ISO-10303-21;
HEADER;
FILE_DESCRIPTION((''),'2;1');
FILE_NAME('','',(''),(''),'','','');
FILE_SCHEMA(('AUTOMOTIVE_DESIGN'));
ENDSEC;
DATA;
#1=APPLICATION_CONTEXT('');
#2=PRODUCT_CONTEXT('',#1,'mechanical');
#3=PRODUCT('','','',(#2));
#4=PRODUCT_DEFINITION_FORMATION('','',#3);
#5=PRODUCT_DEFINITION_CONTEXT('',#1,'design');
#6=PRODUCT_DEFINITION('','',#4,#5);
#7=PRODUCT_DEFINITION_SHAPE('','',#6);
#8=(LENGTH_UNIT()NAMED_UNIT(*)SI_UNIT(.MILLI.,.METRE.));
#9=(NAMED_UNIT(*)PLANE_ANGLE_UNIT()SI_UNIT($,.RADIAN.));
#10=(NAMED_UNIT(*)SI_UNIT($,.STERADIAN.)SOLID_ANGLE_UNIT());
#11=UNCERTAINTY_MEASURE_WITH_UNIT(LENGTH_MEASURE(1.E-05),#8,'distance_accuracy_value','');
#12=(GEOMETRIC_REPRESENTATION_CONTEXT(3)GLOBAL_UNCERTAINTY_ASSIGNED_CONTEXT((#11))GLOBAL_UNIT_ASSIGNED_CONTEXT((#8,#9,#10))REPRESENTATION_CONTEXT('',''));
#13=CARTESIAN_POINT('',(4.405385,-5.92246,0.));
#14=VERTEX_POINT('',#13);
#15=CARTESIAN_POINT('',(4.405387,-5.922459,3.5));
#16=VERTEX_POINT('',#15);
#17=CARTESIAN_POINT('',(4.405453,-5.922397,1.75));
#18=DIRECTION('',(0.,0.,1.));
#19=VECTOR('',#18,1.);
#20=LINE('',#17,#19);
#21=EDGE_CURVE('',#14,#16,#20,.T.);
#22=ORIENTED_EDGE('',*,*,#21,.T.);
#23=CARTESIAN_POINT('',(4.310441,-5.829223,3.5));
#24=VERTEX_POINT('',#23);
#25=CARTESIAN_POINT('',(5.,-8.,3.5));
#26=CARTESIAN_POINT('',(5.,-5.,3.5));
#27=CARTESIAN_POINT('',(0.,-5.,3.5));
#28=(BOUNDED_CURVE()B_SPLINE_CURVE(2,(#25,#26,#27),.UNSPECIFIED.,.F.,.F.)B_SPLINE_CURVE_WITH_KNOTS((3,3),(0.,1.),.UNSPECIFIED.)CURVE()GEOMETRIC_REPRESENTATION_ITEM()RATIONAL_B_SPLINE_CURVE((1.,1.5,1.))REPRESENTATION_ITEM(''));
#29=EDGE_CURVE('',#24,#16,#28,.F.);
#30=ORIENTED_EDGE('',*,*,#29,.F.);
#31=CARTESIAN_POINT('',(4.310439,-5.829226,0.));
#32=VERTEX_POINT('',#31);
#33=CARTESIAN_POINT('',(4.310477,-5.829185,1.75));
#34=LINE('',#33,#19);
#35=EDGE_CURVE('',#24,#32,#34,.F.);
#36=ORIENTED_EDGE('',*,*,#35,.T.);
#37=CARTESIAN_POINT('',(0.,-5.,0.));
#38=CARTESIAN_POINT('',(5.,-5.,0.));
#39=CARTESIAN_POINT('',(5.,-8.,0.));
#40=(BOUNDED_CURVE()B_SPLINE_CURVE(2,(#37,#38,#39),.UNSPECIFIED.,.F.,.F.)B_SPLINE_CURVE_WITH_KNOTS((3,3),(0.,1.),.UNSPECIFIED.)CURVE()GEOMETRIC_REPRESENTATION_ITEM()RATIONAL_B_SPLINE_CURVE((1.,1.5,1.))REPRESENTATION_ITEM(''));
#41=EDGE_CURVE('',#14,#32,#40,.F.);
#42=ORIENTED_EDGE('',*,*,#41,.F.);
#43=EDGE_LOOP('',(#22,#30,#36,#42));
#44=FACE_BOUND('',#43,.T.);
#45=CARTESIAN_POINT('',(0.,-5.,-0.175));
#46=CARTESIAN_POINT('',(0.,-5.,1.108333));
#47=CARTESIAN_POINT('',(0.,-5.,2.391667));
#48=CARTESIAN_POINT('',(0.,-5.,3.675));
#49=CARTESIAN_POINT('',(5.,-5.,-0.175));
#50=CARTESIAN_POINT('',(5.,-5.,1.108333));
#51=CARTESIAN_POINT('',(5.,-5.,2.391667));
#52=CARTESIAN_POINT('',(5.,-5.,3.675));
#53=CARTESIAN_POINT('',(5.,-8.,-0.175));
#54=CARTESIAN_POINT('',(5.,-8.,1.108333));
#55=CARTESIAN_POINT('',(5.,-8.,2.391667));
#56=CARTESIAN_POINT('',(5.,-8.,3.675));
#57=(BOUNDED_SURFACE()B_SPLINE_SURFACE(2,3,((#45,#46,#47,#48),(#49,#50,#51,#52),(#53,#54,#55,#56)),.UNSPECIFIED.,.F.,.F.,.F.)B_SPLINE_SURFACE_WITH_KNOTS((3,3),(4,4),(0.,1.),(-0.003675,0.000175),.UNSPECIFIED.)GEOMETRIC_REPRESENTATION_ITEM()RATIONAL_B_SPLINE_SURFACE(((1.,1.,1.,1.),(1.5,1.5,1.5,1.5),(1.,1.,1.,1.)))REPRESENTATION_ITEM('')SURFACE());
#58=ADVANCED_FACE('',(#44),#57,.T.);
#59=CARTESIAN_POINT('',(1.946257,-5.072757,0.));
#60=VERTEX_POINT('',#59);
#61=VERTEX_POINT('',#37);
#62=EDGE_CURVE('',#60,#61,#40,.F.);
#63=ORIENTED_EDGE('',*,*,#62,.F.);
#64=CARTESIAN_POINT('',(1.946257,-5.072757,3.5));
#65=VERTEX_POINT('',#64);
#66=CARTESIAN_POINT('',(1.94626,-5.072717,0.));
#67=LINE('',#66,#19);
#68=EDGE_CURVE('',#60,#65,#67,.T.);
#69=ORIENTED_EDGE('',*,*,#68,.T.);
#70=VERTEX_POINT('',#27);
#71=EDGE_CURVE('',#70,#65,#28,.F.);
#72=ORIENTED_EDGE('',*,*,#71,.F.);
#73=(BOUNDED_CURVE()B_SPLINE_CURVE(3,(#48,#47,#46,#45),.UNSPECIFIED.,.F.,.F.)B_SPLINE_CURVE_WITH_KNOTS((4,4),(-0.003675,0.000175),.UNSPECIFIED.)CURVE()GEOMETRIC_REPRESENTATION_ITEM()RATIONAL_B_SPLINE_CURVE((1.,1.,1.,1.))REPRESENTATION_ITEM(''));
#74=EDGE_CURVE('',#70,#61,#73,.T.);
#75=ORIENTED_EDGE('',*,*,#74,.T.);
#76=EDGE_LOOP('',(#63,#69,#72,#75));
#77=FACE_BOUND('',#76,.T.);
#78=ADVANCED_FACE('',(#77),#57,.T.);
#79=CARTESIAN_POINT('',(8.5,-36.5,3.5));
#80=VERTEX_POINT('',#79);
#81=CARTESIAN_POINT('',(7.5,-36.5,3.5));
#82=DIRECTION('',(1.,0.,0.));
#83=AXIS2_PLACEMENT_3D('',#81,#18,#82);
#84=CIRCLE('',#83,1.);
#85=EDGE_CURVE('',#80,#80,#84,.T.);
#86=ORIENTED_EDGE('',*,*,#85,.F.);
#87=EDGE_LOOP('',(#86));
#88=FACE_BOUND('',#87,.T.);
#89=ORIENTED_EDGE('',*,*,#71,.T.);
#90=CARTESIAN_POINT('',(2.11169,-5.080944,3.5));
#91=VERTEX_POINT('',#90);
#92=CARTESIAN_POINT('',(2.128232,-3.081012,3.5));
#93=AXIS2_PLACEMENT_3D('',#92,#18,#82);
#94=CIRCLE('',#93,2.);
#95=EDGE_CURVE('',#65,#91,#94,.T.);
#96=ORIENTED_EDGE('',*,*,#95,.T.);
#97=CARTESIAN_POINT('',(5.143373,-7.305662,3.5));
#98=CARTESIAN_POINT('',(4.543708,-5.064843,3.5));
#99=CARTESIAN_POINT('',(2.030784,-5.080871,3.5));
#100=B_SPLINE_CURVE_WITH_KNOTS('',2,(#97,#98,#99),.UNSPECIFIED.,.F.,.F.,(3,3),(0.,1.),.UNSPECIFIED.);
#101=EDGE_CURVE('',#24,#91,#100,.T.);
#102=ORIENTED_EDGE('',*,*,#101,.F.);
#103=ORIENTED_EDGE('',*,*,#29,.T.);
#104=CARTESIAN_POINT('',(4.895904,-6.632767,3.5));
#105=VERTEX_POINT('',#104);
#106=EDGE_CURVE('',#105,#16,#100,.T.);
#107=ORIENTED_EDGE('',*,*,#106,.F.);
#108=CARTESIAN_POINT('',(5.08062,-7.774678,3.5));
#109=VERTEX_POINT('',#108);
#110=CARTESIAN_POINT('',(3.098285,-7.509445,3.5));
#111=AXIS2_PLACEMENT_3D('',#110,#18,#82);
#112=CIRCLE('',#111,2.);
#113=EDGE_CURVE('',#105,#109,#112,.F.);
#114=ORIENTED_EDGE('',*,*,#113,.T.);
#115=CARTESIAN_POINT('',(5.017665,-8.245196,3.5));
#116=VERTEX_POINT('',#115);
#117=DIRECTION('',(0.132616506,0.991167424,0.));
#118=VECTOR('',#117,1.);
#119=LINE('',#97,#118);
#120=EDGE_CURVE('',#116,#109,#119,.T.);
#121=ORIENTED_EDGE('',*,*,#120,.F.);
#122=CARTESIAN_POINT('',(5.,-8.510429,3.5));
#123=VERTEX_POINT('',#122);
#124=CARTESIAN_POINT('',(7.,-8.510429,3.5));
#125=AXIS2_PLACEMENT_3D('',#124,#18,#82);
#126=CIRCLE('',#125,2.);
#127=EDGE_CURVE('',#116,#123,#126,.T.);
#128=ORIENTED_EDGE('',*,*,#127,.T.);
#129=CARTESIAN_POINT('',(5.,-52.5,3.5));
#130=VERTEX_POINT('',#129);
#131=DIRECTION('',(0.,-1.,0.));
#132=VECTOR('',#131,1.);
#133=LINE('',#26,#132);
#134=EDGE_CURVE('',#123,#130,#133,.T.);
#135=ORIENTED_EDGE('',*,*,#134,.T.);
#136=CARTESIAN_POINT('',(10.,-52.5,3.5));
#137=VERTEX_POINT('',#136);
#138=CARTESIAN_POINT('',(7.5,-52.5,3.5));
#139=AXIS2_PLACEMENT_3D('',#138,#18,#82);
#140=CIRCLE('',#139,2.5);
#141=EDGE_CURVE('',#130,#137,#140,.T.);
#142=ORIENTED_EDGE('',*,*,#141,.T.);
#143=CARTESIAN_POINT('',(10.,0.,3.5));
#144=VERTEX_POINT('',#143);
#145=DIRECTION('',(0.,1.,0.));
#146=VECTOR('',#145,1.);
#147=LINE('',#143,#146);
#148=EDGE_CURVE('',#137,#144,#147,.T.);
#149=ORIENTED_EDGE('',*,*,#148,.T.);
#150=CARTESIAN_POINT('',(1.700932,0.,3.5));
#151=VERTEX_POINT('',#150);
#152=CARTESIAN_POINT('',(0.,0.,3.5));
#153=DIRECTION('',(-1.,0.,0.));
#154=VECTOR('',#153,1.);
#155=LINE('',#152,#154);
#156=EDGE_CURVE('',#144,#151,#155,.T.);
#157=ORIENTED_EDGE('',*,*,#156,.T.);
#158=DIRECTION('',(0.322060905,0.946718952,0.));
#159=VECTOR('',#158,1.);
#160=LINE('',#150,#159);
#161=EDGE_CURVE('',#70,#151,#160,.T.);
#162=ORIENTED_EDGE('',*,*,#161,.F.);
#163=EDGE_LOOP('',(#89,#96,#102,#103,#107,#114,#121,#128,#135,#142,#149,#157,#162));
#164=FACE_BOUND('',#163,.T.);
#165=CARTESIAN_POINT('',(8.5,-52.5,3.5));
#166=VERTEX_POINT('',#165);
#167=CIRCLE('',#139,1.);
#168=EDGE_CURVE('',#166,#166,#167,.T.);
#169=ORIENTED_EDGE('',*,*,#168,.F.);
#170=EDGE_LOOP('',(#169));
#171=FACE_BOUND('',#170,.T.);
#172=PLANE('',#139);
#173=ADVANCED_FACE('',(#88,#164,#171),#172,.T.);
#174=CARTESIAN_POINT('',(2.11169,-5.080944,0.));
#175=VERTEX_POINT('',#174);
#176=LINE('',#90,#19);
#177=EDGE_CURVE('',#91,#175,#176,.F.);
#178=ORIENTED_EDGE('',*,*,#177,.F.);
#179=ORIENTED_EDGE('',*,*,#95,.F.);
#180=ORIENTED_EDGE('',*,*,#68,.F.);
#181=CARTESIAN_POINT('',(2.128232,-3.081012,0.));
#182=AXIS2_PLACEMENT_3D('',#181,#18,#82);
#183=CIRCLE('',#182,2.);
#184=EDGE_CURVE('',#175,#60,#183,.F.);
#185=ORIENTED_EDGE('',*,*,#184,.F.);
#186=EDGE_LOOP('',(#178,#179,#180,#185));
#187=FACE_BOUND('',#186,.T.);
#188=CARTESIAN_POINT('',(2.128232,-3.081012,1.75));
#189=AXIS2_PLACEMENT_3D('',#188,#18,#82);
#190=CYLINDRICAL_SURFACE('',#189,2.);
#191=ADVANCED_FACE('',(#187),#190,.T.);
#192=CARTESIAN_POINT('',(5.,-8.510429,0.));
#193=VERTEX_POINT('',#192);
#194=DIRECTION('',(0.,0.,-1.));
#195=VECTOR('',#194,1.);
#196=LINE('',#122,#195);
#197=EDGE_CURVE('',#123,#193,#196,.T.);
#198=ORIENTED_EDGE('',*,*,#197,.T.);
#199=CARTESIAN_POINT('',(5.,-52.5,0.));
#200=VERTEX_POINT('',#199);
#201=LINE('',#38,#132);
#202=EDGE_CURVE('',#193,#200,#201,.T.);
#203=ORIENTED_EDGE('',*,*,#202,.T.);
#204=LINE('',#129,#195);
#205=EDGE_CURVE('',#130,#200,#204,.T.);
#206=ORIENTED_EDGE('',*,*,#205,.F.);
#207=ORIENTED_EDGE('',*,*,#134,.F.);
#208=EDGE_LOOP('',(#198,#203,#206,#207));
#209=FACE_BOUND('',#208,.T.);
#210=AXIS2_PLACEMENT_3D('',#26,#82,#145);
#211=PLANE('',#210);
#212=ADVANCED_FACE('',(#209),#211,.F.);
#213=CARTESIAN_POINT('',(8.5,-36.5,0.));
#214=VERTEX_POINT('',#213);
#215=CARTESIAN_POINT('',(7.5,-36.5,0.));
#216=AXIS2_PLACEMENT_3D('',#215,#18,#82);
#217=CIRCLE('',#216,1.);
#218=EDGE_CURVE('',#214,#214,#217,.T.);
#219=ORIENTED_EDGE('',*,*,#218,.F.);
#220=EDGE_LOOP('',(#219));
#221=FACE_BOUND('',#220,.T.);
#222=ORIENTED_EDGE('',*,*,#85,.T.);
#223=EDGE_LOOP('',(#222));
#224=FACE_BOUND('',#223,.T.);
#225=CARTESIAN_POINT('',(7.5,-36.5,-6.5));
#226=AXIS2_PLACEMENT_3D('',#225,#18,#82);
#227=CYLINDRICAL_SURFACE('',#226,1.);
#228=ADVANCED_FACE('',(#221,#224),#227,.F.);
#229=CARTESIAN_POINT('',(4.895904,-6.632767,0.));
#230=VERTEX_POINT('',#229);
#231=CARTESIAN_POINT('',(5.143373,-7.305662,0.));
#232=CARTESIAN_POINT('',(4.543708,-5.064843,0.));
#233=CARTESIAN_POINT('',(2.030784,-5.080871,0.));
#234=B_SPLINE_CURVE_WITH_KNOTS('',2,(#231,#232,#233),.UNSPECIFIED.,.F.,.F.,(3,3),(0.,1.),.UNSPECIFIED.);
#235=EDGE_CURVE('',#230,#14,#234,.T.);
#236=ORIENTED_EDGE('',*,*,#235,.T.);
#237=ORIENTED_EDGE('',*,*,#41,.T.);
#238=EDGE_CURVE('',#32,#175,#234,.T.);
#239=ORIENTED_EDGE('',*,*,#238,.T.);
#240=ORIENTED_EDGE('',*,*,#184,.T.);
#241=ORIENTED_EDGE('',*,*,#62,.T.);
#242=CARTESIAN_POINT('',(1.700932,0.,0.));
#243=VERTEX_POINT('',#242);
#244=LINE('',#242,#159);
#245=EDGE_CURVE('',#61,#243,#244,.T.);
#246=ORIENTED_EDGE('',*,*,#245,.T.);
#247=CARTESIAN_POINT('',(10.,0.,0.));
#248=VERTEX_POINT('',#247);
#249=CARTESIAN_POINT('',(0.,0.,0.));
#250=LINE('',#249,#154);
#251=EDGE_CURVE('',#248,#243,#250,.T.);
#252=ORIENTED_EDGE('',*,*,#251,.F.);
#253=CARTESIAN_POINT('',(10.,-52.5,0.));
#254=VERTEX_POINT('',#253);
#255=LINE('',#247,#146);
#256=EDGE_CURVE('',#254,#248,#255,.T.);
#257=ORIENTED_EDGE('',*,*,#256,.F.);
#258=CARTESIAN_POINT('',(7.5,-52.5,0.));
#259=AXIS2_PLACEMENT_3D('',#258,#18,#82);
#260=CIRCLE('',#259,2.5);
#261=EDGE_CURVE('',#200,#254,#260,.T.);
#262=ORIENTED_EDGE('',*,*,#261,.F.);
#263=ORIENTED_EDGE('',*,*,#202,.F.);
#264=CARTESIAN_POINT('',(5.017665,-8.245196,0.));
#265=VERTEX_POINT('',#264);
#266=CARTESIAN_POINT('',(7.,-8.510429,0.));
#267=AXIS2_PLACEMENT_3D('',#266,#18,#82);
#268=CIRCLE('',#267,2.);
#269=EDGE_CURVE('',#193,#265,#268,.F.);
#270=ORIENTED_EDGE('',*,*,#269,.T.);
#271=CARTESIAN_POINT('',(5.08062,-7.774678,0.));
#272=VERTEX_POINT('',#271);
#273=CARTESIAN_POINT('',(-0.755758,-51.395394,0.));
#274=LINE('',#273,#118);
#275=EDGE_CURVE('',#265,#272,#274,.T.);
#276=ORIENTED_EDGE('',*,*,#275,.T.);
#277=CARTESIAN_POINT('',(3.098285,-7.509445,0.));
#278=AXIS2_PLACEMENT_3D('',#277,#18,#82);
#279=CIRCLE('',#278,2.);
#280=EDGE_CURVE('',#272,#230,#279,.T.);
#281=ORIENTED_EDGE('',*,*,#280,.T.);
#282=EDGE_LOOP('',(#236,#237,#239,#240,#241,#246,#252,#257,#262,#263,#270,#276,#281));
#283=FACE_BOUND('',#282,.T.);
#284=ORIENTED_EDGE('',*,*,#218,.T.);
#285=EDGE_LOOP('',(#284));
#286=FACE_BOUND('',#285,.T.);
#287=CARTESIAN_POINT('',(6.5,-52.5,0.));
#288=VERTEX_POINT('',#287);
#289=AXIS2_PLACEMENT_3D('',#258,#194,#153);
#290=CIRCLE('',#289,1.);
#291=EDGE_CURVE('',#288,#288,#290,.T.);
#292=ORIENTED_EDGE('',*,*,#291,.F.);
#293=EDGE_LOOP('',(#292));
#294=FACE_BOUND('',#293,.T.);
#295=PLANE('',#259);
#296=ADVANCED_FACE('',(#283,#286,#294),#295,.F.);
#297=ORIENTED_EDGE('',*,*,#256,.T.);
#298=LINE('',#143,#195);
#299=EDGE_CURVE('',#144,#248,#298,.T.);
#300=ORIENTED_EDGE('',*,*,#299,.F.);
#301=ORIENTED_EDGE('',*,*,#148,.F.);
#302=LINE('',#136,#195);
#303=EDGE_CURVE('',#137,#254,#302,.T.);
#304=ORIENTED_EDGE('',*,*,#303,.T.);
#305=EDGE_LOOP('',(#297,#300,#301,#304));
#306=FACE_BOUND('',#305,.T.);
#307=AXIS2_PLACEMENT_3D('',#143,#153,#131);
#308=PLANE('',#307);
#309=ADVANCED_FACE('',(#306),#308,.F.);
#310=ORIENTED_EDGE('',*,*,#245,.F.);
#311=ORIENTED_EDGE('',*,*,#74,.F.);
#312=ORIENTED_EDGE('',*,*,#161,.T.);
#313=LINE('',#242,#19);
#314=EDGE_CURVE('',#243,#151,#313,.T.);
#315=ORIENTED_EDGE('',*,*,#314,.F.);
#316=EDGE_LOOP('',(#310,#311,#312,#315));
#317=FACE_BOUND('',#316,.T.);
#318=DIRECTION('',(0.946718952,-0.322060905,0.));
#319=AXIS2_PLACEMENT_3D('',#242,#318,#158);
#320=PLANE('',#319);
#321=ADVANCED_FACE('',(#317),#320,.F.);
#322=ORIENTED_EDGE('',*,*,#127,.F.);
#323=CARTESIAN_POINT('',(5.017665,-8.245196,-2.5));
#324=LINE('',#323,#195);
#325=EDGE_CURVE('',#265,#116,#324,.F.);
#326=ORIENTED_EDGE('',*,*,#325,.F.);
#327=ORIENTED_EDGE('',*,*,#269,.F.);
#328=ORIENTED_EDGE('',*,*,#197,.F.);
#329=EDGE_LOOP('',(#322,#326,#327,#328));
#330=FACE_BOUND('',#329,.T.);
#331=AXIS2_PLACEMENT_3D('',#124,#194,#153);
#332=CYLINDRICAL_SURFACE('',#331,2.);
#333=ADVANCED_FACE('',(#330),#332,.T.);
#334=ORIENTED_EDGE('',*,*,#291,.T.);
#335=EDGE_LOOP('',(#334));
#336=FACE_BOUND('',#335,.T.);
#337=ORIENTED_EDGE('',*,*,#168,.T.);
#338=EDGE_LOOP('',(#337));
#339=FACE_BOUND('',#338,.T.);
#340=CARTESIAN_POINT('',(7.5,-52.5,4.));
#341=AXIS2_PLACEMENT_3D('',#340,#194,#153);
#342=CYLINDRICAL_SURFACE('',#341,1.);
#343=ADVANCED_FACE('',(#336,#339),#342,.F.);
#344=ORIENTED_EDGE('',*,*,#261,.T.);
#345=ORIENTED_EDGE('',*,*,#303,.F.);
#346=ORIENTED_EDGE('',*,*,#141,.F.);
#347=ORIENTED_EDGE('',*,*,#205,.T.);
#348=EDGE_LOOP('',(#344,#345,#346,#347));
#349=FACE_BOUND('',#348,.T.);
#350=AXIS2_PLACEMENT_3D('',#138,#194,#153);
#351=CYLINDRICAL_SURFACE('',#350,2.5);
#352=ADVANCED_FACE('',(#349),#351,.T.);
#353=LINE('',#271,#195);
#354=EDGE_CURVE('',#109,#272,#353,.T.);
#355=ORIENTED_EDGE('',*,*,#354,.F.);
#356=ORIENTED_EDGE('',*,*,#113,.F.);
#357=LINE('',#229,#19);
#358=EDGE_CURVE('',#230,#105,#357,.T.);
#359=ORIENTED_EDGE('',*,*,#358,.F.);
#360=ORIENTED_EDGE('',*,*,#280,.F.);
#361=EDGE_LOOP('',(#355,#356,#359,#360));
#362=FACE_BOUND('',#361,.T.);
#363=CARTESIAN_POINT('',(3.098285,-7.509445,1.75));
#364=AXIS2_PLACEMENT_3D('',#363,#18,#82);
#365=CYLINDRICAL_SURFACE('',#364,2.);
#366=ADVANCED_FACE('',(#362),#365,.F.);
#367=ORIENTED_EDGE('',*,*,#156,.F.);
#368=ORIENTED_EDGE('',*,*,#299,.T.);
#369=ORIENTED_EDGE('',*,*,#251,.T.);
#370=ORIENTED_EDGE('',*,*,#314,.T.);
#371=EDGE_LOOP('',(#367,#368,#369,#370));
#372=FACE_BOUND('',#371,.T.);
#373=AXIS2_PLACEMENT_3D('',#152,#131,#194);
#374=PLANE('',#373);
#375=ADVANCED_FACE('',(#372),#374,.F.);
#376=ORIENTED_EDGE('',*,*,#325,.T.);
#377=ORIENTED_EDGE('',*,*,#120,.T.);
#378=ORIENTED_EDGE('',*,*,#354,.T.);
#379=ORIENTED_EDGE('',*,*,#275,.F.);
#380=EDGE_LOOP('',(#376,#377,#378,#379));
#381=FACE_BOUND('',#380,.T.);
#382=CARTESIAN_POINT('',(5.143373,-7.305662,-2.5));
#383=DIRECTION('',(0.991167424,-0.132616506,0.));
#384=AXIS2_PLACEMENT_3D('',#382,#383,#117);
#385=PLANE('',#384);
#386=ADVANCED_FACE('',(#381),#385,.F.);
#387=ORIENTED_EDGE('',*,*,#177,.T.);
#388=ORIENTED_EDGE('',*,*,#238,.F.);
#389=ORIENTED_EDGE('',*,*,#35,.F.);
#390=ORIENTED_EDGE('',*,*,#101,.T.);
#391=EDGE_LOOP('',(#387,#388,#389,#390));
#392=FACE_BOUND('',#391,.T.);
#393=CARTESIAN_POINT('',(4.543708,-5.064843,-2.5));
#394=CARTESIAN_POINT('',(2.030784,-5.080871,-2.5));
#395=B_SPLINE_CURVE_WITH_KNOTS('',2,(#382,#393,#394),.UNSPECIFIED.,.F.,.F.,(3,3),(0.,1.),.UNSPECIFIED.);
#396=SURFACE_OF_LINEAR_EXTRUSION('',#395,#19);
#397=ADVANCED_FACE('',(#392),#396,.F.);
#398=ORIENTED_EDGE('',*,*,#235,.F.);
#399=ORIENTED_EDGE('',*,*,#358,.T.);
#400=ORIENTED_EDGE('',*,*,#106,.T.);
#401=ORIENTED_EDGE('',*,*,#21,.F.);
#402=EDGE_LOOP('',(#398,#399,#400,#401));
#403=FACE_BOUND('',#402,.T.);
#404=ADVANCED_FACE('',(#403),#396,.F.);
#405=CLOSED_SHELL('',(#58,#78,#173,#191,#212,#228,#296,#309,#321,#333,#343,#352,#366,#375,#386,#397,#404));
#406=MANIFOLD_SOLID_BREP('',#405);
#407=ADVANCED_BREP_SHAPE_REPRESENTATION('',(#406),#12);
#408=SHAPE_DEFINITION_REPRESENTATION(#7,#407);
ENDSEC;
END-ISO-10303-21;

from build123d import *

# Parameters (mm, degrees)
BOSS_EXTRU_1_DEPTH      = 3.5
ESQUISSE3_R             = 1
ENL_V_MAT_EXTRU_1_DEPTH = 4
ESQUISSE4_R             = 1
ENL_V_MAT_EXTRU_2_DEPTH = 10
ENL_V_MAT_EXTRU_3_DEPTH = 57.011159602
CONG_1_SIZE             = 5
CONG_1_SIZE_2           = 3
ENL_V_MAT_EXTRU_7_DEPTH = 6
CONG_4_R                = 2
CONG_5_R                = 2


with BuildPart() as part:
    # Esquisse1 → Boss.-Extru.1 (new body)
    with BuildSketch(Plane.XY):
        with BuildLine():
            Line((0, 0), (10, 0))
            Line((10, 0), (10, -52.5))
            ThreePointArc((10, -52.5), (7.5, -55), (5, -52.5))
            Line((5, -52.5), (5, -5))
            Line((5, -5), (0, -5))
            Line((0, -5), (0, 0))
        make_face()
    extrude(amount=BOSS_EXTRU_1_DEPTH)

    # Esquisse3 → Enlèv. mat.-Extru.1 (cut)
    with BuildSketch(Plane(origin=(0, 0, 0), x_dir=(-1, 0, 0), z_dir=(0, 0, -1))):
        with Locations((-7.5, -52.5)):
            Circle(ESQUISSE3_R)
    extrude(amount=-ENL_V_MAT_EXTRU_1_DEPTH, mode=Mode.SUBTRACT)

    # Esquisse4 → Enlèv. mat.-Extru.2 (cut)
    with BuildSketch(Plane.XY.offset(3.5)):
        with Locations((7.5, -36.5)):
            Circle(ESQUISSE4_R)
    extrude(amount=-ENL_V_MAT_EXTRU_2_DEPTH, mode=Mode.SUBTRACT)

    # Esquisse5 → Enlèv. mat.-Extru.3 (cut, through all)
    with BuildSketch(Plane.XY.offset(3.5)):
        Polygon((0, 0), (1.700931961, 0), (0, -5), align=None)
    extrude(amount=-ENL_V_MAT_EXTRU_3_DEPTH, mode=Mode.SUBTRACT)

    # Congé1
    # a fillet whose section is not a circle: 5, 3 mm, written as the material it adds along each edge
    with BuildSketch(Plane(origin=(5, -5, 0), x_dir=(-1, 0, 0), z_dir=(0, 0, 1))) as cong_1_piece_1_section:
        with BuildLine():
            Bezier((CONG_1_SIZE, 0), (0, 0), (0, CONG_1_SIZE_2), weights=[1, 1.5, 1])
            Line((0, CONG_1_SIZE_2), (0, 0))
            Line((0, 0), (CONG_1_SIZE, 0))
        make_face()
    cong_1_piece_1 = extrude(amount=3.5, mode=Mode.PRIVATE)
    cong_1_piece_1 = split(cong_1_piece_1, bisect_by=Plane(origin=(0.518616131, -3.47549419, 0), z_dir=(0.9467189518296611, -0.32206090456084224, 0)), keep=Keep.TOP, mode=Mode.PRIVATE)
    add(cong_1_piece_1)

    # Esquisse11 → Enlèv. mat.-Extru.7 (cut)
    with BuildSketch(Plane.XY.offset(3.5)):
        with BuildLine():
            Line((5.143373152, -7.30566223), (4.982244072, -8.50993083))
            Line((4.982244072, -8.50993083), (2.030783729, -5.080870965))
            add(Edge.make_bspline(
                [(2.030783729, -5.080870965), (4.543708127, -5.064842627), (5.143373152, -7.30566223)],
                knots=[0, 0, 0, 1, 1, 1], degree=2))
        make_face()
    extrude(amount=-ENL_V_MAT_EXTRU_7_DEPTH, mode=Mode.SUBTRACT)

    # Congé4
    cong_4_edges = [part.edges().sort_by_distance(p)[0] for p in [
        (5, -8.377224145, 1.75),
        (5.143373152, -7.30566223, 1.75),
    ]]
    fillet(cong_4_edges, radius=CONG_4_R)

    # Congé5
    cong_5_edges = [part.edges().sort_by_distance(p)[0] for p in [
        (2.032105754, -5.080862688, 1.75),
    ]]
    fillet(cong_5_edges, radius=CONG_5_R)


solid = part.part
